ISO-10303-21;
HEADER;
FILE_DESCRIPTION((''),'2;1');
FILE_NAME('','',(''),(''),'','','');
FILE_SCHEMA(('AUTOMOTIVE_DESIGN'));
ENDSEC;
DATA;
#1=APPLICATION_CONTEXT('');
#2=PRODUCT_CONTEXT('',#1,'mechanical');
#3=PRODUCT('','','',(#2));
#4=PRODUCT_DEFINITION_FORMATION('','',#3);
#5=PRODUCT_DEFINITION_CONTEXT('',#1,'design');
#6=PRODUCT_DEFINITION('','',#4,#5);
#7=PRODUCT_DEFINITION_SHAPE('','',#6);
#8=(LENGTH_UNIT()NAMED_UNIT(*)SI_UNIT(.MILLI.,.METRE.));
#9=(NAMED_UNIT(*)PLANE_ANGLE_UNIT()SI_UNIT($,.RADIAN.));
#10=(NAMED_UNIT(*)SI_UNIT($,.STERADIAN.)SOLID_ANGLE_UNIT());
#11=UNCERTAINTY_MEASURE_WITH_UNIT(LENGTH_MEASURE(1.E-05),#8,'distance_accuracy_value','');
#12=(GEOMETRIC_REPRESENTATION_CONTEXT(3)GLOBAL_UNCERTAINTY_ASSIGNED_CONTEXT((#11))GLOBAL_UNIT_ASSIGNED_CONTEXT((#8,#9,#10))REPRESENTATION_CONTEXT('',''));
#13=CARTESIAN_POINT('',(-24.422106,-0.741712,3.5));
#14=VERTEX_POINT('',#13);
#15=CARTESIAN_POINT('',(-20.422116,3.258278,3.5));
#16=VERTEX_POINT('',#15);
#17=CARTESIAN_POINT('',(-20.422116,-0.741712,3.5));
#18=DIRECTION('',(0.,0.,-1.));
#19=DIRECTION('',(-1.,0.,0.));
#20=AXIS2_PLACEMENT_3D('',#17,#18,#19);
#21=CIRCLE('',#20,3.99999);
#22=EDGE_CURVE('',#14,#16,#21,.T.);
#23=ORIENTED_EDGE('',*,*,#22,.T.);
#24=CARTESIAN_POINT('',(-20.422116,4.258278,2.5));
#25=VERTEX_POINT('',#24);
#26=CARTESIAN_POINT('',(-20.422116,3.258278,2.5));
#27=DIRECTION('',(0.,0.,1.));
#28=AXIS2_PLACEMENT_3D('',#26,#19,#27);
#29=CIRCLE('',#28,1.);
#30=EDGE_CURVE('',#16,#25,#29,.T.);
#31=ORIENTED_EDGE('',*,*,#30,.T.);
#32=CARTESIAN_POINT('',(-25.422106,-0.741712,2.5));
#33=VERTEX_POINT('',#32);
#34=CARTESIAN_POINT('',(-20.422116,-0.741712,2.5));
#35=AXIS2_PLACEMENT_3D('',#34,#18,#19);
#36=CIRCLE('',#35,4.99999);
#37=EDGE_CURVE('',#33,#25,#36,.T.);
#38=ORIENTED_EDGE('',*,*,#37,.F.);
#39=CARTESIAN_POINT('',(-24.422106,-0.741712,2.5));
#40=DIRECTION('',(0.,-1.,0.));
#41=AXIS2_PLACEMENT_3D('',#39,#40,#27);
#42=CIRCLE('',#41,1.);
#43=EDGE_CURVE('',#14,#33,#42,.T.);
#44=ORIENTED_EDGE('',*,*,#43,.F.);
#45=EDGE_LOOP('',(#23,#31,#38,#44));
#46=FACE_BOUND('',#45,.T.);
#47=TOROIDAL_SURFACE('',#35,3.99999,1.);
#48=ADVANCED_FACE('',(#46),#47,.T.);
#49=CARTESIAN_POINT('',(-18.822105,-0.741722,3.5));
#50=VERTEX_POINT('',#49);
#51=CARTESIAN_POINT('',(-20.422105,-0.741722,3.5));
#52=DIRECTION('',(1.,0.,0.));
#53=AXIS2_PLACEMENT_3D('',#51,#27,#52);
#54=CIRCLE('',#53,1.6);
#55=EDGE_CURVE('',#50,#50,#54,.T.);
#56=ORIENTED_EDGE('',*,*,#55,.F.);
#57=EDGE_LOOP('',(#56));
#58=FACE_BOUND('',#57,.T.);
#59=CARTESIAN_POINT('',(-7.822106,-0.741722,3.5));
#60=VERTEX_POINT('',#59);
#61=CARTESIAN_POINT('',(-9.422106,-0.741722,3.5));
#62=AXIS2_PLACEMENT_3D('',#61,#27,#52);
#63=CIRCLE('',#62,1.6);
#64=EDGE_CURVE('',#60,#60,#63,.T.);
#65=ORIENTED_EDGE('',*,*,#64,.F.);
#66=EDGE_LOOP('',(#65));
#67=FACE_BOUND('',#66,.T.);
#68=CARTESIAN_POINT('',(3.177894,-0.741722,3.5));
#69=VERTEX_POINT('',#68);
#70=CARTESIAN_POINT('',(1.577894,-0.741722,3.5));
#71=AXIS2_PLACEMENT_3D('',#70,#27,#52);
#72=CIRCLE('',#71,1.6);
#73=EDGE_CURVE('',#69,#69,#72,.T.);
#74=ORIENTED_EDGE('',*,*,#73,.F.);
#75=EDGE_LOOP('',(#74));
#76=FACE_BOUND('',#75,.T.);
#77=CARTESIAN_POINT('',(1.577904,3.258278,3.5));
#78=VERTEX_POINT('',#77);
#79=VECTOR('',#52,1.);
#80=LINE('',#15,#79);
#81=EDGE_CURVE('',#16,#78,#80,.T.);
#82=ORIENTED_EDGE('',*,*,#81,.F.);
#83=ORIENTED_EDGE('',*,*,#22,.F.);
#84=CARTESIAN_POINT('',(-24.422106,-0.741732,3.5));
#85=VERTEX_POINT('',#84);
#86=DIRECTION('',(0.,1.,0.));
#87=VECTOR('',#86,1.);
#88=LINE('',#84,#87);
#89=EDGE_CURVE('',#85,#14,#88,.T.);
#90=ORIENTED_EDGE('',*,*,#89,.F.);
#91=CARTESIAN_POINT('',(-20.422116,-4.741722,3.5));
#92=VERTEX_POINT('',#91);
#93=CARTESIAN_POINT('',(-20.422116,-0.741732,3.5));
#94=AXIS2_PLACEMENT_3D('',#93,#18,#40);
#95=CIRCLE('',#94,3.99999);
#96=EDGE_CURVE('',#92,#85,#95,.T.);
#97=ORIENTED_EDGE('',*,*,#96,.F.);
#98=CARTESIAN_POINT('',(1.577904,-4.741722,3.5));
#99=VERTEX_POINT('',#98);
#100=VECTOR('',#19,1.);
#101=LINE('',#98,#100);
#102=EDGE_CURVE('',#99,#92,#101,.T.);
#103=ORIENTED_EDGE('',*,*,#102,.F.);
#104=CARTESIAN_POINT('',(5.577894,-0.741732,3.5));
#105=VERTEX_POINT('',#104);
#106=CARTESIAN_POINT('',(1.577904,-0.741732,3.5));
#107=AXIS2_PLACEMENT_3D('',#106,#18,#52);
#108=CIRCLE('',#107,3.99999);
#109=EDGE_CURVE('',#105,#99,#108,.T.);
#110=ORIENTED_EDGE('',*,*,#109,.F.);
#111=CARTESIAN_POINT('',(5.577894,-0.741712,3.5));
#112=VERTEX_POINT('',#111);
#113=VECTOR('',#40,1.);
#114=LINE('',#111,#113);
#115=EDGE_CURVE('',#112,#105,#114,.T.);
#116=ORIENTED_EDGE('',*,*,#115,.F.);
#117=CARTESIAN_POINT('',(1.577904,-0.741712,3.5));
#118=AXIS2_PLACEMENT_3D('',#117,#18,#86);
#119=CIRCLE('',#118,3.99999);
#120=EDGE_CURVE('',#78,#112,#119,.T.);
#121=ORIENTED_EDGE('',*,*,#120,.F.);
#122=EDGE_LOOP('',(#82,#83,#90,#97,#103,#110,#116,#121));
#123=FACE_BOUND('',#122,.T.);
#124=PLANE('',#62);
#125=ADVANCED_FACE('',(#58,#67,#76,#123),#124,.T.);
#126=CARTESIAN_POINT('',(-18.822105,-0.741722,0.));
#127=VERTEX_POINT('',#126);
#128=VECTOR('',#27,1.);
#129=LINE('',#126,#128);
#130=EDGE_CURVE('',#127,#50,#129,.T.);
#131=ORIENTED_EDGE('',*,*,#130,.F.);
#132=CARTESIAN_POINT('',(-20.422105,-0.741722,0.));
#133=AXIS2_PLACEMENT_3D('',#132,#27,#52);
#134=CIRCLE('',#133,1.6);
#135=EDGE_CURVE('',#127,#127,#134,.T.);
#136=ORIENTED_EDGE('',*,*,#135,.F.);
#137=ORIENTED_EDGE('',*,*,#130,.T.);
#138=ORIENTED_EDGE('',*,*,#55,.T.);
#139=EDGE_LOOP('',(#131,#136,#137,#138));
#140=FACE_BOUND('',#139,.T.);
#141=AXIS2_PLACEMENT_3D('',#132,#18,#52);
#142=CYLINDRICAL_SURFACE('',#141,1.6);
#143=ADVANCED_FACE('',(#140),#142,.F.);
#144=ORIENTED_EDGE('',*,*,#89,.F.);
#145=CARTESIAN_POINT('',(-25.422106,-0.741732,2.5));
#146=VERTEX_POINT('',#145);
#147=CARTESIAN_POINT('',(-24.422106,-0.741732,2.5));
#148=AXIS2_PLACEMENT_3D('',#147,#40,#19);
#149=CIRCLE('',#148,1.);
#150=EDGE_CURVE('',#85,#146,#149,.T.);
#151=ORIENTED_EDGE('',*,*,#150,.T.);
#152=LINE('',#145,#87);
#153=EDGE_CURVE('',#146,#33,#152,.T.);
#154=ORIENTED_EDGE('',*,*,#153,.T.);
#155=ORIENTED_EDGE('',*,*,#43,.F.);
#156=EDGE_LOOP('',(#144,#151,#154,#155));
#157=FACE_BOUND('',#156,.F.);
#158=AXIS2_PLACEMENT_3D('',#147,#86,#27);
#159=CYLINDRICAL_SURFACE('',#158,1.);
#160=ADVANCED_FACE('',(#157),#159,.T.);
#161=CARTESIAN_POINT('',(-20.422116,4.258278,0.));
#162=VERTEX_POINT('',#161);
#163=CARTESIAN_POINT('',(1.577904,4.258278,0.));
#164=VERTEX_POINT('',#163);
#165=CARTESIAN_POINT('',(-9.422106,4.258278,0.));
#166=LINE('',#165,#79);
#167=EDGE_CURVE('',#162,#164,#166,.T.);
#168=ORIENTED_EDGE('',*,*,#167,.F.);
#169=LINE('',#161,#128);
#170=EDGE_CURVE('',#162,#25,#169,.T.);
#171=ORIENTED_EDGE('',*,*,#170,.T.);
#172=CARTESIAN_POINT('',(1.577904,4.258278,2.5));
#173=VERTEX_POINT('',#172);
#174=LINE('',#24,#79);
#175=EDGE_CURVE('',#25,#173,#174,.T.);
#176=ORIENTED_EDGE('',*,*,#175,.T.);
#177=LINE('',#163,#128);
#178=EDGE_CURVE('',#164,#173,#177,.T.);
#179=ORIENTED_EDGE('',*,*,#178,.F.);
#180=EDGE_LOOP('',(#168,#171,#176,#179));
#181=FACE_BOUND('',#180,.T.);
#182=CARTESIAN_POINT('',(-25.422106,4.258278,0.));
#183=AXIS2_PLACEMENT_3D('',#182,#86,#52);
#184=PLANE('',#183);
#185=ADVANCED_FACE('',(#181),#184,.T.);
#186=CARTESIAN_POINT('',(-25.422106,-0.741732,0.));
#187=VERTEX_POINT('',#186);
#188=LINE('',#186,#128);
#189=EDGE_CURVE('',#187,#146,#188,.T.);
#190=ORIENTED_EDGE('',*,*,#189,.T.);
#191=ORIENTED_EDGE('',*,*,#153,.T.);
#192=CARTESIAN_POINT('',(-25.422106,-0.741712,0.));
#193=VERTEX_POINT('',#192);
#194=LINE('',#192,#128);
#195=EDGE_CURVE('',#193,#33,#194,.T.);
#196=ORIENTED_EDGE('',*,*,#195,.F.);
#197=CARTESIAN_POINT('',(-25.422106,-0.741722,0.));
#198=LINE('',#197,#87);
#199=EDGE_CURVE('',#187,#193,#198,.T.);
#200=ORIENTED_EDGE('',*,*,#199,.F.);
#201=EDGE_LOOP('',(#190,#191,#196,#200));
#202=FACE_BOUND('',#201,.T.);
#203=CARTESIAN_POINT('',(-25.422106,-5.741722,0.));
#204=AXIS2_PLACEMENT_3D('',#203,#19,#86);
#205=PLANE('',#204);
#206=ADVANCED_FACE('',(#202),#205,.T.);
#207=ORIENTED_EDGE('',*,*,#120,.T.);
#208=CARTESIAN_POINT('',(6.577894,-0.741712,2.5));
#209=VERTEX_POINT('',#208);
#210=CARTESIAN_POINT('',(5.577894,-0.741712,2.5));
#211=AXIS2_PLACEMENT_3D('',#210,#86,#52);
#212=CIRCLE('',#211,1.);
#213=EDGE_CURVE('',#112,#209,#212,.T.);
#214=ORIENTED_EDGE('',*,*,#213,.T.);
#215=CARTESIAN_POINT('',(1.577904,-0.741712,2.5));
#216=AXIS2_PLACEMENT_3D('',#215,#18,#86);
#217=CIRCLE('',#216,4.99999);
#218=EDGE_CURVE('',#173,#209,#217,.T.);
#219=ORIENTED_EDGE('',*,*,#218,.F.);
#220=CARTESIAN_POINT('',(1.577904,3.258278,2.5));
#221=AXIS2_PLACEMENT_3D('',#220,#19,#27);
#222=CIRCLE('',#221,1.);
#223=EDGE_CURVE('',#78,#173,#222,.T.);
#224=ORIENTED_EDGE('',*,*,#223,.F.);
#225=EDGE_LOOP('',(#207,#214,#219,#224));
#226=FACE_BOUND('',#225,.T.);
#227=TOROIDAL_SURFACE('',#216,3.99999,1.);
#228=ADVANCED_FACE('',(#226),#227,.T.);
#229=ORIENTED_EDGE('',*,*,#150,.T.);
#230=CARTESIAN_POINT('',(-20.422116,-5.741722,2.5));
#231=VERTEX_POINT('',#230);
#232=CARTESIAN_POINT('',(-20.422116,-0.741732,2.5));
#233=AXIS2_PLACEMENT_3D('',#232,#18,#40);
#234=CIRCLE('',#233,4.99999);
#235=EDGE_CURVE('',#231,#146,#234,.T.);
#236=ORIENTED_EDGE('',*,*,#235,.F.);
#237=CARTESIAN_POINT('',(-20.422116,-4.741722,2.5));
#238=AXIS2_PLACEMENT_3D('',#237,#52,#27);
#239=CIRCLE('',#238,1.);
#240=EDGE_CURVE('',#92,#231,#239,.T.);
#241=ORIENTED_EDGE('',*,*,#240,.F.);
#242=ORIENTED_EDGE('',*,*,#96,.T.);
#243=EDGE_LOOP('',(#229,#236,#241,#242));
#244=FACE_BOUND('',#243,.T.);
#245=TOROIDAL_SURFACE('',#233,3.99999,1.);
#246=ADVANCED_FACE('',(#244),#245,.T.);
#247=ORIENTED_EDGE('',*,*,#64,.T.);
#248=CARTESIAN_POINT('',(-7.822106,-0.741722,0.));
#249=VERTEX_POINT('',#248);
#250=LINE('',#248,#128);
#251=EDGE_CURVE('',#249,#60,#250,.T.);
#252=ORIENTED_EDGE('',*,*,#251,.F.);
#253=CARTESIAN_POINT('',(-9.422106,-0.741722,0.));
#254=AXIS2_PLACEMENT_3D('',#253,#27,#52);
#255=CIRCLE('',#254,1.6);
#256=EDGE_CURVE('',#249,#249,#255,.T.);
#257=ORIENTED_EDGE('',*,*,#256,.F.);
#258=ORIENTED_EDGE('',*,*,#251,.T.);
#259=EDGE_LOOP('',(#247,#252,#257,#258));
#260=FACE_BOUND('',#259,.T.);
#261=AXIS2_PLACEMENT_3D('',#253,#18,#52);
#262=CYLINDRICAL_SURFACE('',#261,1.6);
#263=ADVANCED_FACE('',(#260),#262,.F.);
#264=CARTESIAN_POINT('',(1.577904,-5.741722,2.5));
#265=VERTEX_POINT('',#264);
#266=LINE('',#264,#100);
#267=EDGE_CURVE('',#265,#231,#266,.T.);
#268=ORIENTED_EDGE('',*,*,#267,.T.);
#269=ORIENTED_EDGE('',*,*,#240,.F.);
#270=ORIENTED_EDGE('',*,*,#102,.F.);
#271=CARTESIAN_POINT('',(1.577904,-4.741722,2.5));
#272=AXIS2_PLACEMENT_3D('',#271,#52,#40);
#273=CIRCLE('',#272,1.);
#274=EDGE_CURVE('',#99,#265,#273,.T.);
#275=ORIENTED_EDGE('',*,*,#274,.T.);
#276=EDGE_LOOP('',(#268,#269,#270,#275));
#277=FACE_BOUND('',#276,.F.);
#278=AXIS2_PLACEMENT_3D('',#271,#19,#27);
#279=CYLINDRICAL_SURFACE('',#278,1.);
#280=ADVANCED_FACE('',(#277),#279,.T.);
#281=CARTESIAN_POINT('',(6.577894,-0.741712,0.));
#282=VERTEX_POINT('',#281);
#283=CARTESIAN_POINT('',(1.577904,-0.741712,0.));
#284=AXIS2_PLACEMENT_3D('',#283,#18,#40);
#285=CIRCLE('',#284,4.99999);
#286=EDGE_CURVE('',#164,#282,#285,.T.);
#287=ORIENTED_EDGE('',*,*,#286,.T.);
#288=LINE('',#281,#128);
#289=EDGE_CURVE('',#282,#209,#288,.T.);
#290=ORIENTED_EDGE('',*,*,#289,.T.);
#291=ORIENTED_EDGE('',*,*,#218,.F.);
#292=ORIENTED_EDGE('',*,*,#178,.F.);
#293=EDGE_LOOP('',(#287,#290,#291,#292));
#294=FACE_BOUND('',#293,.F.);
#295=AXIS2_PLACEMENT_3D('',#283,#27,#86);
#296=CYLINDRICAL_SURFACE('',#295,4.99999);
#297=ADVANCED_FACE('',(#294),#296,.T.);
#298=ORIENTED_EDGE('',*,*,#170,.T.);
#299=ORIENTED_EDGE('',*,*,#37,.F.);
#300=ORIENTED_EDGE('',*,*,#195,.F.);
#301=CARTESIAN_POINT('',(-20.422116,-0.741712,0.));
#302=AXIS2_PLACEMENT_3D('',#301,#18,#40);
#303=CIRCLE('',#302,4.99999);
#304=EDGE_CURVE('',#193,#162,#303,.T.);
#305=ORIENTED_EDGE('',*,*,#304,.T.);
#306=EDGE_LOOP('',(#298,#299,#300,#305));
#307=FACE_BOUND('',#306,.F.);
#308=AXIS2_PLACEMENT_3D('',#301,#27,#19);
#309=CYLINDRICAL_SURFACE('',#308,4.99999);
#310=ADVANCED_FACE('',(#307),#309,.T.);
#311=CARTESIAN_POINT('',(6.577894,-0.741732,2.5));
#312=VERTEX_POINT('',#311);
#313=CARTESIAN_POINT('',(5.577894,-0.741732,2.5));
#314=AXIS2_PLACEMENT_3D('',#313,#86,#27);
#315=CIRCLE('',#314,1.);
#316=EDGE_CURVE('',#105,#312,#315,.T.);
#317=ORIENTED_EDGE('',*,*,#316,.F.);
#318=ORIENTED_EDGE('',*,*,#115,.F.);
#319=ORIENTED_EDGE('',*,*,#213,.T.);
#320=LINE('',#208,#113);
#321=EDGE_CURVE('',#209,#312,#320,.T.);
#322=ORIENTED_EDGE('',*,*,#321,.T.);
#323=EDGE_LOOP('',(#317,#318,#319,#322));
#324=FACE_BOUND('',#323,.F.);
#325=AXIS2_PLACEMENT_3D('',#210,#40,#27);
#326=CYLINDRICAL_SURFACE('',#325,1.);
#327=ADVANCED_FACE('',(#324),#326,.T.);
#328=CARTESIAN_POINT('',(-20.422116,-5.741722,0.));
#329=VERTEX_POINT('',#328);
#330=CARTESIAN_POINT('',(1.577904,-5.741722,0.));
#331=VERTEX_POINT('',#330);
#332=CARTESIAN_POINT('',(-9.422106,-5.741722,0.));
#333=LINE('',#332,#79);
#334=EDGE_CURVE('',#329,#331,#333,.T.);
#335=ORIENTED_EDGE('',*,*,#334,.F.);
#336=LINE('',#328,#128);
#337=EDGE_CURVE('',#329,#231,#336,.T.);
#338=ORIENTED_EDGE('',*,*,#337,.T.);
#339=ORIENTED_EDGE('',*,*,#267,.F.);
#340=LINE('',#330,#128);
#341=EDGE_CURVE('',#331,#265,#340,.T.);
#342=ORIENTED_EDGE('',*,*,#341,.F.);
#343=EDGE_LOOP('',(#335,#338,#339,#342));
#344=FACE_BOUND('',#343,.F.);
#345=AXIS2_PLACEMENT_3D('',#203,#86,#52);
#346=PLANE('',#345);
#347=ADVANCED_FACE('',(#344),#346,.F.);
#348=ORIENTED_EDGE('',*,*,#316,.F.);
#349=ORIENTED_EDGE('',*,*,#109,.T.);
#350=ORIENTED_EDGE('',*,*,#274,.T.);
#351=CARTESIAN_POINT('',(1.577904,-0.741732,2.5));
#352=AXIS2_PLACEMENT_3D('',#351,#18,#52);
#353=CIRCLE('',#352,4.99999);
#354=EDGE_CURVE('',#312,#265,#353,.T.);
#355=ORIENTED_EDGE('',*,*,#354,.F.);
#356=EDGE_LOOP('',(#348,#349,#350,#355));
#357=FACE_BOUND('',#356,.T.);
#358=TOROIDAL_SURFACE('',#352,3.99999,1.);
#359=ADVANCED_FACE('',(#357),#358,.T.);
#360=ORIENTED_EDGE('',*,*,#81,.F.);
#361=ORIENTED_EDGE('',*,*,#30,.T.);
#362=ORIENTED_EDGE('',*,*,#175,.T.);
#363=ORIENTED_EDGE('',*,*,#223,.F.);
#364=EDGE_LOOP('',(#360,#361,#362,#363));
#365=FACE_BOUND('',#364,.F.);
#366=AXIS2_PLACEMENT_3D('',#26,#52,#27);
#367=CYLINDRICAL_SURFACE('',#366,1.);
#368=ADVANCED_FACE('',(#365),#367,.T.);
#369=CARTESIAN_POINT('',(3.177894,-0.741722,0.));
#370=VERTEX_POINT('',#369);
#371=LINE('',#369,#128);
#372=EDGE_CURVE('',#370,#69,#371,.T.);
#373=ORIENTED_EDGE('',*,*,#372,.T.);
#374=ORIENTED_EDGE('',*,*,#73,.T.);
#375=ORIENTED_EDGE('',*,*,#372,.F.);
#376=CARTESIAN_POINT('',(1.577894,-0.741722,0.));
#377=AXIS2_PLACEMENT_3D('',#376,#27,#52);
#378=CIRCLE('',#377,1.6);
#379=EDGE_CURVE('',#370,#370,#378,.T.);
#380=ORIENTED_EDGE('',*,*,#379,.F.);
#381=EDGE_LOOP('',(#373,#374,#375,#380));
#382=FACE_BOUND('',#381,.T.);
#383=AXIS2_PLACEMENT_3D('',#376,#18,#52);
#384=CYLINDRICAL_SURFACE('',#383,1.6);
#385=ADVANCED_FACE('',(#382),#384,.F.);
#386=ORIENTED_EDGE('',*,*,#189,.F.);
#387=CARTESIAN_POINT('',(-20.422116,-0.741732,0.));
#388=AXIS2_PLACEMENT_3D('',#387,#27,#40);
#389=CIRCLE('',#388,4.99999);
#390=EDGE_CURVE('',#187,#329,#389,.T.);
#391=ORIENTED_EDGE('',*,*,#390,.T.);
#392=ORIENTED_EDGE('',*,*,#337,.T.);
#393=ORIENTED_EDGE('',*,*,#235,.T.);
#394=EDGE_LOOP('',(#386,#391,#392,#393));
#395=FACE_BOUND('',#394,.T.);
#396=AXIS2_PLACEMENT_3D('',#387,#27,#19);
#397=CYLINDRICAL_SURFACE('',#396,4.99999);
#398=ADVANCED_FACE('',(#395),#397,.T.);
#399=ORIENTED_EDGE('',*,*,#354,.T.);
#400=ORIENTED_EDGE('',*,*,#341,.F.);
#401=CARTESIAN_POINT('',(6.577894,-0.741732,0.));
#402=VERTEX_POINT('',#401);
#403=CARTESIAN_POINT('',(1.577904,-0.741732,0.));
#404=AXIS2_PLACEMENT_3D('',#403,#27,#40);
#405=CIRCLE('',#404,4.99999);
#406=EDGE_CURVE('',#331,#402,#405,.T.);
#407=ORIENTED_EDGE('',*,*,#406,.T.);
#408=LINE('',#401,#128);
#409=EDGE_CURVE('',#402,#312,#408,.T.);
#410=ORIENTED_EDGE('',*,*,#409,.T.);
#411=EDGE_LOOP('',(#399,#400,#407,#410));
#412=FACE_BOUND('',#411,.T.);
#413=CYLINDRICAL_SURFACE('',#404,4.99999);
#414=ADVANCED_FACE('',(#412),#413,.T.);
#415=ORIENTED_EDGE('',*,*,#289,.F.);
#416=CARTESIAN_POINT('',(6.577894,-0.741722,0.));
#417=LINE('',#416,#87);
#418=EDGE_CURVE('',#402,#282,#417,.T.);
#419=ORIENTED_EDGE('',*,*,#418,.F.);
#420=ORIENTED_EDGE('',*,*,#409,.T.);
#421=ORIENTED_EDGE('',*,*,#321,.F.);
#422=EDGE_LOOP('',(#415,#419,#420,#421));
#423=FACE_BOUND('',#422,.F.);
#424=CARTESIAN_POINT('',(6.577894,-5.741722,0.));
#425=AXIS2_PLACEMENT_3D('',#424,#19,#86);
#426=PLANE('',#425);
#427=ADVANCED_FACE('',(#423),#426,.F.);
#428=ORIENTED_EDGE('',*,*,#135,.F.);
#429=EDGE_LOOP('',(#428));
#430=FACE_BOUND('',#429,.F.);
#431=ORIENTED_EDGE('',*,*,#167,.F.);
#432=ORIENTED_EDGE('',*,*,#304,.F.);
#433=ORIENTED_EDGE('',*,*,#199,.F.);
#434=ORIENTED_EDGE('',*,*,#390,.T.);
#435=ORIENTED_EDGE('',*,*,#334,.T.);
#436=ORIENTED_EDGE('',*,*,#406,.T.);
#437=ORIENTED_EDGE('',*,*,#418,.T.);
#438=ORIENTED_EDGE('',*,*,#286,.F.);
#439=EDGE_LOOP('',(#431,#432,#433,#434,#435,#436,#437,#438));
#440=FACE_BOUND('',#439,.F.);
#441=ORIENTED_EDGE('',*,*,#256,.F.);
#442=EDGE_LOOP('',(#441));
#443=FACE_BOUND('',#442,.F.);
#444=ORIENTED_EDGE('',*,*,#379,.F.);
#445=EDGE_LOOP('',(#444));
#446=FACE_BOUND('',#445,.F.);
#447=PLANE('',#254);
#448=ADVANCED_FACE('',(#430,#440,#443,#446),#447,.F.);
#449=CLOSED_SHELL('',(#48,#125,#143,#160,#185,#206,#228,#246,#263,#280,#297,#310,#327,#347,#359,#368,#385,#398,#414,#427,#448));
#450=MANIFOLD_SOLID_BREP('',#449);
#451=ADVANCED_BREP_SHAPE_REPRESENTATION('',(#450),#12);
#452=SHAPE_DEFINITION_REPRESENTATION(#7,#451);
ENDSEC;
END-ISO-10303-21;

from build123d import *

# Parameters (mm, degrees)
F0_W     = 32
F0_H     = 10
F0_R     = 1.6
F1_DEPTH = 3.5
F2_R     = 4.99999
F3_R     = 1


# Not quite as in the source:
# - a fillet or chamfer is up to 0.001 mm smaller than in the source, because OpenCascade refuses the exact size


with BuildPart() as f1:
    # F0 (on Top) → F1 (new body)
    with BuildSketch(Plane.XY):
        with Locations((-9.4221055731, -0.7417218951)):
            Rectangle(F0_W, F0_H)
        with Locations((-20.4221047461, -0.7417218951)):
            Circle(F0_R, mode=Mode.SUBTRACT)
        with Locations((-9.4221055731, -0.7417218951)):
            Circle(F0_R, mode=Mode.SUBTRACT)
        with Locations((1.5778944269, -0.7417218951)):
            Circle(F0_R, mode=Mode.SUBTRACT)
    extrude(amount=F1_DEPTH)

    # F2 (radius 5 in the source; OpenCascade refuses exactly that, so slightly less here)
    f2_edges = [f1.edges().sort_by_distance(p)[0] for p in [
        (6.577894, 4.258278, 1.75),
        (6.577894, -5.741722, 1.75),
        (-25.422106, 4.258278, 1.75),
        (-25.422106, -5.741722, 1.75),
    ]]
    fillet(f2_edges, radius=F2_R)

    # F3
    f3_edges = [f1.edges().sort_by_distance(p)[0] for p in [
        (-9.422106, 4.258278, 3.5),
        (-9.422106, -5.741722, 3.5),
    ]]
    fillet(f3_edges, radius=F3_R)


solid = f1.part
